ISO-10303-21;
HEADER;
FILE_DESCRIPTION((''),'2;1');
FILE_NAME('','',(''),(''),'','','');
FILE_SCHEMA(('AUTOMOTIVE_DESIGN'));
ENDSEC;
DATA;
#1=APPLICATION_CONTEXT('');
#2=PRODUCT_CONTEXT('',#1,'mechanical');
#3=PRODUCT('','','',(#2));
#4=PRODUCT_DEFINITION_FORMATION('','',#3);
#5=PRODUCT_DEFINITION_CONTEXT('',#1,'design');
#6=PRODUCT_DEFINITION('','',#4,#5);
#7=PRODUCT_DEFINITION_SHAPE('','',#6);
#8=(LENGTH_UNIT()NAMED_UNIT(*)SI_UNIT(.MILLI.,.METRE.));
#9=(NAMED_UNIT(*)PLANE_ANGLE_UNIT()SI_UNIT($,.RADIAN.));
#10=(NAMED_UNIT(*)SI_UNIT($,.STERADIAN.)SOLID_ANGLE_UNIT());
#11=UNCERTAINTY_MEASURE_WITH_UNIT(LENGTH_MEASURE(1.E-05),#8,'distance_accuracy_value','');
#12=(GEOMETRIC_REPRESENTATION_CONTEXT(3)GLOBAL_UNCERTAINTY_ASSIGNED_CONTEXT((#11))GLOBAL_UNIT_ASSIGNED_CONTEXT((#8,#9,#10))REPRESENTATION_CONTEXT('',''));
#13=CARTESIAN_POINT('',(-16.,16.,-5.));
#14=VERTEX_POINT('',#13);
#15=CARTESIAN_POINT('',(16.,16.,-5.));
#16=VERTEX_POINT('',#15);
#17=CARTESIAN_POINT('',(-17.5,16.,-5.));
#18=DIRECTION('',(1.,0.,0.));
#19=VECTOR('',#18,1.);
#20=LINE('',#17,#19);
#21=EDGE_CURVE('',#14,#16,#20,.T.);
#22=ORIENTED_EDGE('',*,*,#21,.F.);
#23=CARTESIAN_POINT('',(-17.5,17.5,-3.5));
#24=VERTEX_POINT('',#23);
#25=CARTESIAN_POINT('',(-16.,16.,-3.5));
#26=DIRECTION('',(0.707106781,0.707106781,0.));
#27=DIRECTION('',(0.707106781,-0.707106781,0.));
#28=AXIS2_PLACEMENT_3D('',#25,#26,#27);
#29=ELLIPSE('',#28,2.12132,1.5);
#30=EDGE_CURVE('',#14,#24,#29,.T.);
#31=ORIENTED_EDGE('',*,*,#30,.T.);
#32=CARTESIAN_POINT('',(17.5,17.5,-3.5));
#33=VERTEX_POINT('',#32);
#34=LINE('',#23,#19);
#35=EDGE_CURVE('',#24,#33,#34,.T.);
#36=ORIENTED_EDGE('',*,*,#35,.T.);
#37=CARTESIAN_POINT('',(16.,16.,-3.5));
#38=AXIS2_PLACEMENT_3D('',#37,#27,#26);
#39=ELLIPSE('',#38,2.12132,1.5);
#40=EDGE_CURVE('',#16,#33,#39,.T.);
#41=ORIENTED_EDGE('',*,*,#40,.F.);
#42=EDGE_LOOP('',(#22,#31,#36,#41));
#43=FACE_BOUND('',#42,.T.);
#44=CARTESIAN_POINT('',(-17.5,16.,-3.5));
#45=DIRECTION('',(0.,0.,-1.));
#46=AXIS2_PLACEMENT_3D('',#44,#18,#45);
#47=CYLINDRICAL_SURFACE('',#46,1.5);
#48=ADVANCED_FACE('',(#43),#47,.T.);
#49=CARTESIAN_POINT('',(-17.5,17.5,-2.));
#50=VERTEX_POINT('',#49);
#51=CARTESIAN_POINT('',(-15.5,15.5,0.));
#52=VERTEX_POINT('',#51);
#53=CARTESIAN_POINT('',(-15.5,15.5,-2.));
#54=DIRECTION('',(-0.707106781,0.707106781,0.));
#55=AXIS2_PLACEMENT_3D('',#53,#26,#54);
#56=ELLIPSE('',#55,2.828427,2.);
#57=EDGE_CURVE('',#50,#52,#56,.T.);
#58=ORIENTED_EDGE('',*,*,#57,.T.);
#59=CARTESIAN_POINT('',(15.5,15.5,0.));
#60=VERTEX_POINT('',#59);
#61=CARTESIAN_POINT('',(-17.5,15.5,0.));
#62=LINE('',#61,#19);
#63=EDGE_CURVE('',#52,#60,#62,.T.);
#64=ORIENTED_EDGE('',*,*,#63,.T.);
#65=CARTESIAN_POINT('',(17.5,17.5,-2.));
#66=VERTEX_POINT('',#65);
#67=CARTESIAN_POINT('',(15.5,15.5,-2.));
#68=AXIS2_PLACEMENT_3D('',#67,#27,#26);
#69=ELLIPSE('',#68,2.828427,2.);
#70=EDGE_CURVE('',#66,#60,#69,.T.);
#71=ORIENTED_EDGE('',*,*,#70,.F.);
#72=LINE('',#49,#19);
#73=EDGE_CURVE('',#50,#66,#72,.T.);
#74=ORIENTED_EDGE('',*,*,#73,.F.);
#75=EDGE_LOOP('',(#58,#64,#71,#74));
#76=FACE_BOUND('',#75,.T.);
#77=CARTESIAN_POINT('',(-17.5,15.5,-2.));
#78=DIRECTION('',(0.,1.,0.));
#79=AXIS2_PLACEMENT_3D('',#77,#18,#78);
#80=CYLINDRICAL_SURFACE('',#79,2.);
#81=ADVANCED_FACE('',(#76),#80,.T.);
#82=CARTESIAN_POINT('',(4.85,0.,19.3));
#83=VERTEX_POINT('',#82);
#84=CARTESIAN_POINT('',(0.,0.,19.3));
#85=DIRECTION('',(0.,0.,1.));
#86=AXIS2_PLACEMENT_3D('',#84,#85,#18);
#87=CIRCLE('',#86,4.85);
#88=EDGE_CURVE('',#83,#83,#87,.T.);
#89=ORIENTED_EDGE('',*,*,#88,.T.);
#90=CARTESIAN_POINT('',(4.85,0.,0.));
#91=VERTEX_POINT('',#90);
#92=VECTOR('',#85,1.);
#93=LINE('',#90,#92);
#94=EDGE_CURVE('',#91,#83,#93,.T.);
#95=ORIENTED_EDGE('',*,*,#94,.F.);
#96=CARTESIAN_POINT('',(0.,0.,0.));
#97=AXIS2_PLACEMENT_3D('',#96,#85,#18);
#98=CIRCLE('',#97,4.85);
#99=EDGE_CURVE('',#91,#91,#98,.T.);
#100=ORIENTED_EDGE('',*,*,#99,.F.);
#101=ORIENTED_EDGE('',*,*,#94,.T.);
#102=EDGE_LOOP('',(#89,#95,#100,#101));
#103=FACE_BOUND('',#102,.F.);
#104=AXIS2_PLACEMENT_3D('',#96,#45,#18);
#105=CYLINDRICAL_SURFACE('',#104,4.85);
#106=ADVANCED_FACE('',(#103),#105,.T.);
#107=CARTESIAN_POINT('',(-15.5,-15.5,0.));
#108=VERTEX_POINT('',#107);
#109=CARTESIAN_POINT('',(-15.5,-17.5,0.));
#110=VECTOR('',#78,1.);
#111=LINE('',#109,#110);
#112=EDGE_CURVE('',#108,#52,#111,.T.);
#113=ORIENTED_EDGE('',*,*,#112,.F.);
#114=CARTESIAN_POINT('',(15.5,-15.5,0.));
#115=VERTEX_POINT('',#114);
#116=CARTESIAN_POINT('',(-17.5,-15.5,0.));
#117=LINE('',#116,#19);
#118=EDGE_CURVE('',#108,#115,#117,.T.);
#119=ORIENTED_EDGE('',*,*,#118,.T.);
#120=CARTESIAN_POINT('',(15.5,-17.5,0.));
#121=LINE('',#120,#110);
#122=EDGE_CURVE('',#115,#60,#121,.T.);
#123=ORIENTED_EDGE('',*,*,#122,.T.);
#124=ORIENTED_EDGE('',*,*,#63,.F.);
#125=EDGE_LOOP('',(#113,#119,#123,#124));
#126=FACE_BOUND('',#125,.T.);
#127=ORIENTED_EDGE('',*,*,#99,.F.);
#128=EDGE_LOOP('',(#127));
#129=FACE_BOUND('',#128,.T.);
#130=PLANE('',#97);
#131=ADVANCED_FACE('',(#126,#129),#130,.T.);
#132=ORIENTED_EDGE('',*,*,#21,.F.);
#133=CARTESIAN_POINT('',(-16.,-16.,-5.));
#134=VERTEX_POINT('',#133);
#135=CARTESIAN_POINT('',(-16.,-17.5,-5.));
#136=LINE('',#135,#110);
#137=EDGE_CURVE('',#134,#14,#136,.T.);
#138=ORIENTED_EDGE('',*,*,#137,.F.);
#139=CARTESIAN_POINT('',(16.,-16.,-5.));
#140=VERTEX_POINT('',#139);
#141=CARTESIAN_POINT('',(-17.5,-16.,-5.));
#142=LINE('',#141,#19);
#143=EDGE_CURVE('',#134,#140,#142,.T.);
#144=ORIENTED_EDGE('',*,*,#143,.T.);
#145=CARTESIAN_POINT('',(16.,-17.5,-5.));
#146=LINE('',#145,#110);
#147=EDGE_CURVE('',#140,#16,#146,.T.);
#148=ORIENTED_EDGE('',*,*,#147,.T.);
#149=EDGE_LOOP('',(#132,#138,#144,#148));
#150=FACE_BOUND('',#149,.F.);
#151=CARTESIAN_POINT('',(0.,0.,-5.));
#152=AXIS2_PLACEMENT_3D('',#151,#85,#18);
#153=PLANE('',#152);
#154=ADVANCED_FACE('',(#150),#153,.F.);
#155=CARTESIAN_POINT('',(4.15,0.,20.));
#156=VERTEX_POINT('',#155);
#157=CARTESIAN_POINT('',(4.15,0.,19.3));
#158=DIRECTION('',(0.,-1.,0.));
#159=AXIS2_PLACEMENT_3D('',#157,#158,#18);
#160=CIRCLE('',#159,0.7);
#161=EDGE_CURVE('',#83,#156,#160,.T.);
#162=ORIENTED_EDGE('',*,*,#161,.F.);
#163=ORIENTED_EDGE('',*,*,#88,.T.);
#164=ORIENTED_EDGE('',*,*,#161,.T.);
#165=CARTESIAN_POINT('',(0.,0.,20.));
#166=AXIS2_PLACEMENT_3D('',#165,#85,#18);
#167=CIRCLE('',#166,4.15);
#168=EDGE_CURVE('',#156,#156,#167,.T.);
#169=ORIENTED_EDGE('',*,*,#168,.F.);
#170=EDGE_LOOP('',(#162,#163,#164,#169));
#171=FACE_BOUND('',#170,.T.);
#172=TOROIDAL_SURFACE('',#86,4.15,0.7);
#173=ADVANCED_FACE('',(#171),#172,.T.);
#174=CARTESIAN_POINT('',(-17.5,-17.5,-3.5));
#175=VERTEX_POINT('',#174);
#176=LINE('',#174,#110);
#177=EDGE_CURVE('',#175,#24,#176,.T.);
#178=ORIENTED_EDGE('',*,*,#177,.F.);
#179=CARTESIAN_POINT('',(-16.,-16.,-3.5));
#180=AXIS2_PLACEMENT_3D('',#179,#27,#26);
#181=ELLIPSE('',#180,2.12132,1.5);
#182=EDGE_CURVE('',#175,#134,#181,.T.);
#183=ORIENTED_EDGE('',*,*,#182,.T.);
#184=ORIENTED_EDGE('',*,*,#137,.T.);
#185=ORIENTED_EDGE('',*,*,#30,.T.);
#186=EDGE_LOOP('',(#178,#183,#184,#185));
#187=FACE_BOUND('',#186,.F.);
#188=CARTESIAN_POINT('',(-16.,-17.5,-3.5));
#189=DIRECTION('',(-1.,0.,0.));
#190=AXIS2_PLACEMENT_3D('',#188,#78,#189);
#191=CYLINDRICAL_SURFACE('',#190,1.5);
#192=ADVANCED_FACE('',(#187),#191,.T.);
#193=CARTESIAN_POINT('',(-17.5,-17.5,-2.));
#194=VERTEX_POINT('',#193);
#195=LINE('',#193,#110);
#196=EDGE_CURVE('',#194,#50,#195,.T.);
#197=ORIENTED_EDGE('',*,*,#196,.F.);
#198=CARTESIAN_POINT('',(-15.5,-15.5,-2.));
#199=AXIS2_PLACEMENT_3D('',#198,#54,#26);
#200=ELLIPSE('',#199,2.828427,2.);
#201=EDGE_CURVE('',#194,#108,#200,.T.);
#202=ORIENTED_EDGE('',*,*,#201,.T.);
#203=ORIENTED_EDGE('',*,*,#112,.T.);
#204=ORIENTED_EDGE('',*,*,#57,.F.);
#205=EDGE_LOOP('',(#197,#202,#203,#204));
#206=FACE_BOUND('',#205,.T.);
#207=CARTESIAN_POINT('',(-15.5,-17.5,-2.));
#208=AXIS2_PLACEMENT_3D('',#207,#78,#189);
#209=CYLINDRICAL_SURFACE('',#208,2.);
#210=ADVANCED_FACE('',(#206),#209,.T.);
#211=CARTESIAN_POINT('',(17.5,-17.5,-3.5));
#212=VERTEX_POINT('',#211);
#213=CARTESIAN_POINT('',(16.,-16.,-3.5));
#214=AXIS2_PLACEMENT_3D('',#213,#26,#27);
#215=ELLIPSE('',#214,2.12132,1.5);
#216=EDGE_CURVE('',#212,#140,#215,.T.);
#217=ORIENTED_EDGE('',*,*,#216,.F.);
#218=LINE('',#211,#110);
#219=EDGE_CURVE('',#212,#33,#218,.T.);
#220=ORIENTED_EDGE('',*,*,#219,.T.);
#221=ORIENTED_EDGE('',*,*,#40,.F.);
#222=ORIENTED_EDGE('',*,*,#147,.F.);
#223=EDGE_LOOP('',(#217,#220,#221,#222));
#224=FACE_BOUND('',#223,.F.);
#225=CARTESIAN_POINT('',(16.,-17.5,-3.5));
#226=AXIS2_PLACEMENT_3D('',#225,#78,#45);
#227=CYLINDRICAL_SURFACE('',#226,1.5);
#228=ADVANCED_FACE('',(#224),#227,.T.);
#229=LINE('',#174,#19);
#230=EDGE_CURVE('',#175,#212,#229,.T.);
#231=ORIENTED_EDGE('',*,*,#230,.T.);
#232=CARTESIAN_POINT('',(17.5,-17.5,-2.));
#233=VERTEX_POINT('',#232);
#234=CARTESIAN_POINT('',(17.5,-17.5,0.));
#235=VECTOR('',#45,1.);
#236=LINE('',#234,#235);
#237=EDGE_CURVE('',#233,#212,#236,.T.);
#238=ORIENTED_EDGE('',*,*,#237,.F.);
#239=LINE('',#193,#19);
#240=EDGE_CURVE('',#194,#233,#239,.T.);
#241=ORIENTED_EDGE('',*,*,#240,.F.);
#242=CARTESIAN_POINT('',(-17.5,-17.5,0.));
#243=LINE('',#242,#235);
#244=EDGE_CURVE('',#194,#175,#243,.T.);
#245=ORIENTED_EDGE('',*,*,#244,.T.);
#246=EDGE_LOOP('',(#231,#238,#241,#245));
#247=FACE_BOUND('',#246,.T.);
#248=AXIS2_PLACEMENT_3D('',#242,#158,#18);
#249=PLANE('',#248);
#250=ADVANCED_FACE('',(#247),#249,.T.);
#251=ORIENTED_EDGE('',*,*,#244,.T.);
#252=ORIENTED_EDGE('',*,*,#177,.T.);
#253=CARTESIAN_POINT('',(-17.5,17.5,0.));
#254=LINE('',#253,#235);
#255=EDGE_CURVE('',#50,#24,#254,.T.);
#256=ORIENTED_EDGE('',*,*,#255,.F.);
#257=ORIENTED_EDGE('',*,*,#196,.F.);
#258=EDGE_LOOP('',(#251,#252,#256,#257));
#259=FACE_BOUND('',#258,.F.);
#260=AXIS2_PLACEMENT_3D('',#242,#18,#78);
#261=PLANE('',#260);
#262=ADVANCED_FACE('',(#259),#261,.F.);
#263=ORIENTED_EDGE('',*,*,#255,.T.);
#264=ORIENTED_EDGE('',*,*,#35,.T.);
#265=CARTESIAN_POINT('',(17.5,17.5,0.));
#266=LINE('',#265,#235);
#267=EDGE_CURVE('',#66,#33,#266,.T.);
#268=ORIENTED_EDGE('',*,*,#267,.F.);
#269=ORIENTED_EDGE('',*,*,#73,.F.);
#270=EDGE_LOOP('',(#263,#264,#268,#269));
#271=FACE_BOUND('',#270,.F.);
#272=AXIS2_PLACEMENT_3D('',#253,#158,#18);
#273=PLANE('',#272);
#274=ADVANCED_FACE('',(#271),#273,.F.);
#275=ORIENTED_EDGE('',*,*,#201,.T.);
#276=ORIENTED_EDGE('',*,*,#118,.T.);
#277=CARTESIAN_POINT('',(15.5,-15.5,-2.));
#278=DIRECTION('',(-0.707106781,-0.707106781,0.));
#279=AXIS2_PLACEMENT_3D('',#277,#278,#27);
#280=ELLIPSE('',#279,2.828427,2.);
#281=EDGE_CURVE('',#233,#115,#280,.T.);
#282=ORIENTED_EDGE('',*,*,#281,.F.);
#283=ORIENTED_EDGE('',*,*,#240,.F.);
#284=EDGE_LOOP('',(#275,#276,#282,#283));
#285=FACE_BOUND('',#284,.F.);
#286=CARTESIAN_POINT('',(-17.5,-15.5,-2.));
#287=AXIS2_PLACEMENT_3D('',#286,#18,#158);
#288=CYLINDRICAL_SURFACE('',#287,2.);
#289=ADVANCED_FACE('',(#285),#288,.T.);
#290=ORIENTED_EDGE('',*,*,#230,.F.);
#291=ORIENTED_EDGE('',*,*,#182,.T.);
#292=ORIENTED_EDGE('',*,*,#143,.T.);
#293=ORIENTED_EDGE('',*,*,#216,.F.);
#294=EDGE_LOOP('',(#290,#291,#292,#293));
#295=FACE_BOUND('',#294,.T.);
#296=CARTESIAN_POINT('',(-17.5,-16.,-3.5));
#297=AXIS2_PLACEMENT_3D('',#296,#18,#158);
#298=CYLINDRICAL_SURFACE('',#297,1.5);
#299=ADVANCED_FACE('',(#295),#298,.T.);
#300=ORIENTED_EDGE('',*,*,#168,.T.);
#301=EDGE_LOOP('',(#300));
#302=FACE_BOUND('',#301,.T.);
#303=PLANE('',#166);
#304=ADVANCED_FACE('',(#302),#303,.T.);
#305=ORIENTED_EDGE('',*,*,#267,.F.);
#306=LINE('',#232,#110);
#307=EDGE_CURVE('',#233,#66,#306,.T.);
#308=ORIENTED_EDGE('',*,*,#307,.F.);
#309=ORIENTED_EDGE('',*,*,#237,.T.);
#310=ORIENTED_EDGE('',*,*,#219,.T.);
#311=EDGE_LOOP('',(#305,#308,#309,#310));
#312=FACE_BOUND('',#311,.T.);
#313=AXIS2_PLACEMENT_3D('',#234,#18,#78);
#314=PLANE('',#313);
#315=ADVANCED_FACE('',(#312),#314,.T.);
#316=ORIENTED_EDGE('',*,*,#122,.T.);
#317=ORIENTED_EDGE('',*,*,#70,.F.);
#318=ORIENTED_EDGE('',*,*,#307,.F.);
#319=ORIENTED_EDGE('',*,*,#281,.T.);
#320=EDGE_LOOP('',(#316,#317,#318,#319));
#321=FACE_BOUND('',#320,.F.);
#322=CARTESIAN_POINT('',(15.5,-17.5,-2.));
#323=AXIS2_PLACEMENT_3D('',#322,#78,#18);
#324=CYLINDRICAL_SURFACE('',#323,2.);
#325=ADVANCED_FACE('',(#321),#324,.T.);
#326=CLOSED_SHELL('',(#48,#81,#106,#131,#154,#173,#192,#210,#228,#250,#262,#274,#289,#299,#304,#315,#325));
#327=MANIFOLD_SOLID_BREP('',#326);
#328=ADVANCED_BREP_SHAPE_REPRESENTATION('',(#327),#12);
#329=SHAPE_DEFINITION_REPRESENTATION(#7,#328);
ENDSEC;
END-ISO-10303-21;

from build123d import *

# Parameters (mm, degrees)
F0_W     = 35
F0_H     = 35
F1_DEPTH = 5
F3_R     = 2
F4_R     = 1.5
F2_R     = 4.85
F5_DEPTH = 20
F6_R     = 0.7


with BuildPart() as f1:
    # F0 (on Top) → F1 (new body)
    with BuildSketch(Plane.XY):
        Rectangle(F0_W, F0_H)
    extrude(amount=-F1_DEPTH)

    # F3
    f3_edges = [f1.edges().sort_by_distance(p)[0] for p in [
        (0, -17.5, 0),
        (-17.5, 0, 0),
        (0, 17.5, 0),
        (17.5, 0, 0),
    ]]
    fillet(f3_edges, radius=F3_R)

    # F4
    f4_edges = [f1.edges().sort_by_distance(p)[0] for p in [
        (0, 17.5, -5),
        (-17.5, 0, -5),
        (0, -17.5, -5),
        (17.5, 0, -5),
    ]]
    fillet(f4_edges, radius=F4_R)

    # F2 (on Top) → F5 (join)
    with BuildSketch(Plane.XY):
        Circle(F2_R)
    extrude(amount=F5_DEPTH)

    # F6
    f6_edges = [f1.edges().sort_by_distance(p)[0] for p in [
        (-4.85, 0, 20),
    ]]
    fillet(f6_edges, radius=F6_R)


solid = f1.part
